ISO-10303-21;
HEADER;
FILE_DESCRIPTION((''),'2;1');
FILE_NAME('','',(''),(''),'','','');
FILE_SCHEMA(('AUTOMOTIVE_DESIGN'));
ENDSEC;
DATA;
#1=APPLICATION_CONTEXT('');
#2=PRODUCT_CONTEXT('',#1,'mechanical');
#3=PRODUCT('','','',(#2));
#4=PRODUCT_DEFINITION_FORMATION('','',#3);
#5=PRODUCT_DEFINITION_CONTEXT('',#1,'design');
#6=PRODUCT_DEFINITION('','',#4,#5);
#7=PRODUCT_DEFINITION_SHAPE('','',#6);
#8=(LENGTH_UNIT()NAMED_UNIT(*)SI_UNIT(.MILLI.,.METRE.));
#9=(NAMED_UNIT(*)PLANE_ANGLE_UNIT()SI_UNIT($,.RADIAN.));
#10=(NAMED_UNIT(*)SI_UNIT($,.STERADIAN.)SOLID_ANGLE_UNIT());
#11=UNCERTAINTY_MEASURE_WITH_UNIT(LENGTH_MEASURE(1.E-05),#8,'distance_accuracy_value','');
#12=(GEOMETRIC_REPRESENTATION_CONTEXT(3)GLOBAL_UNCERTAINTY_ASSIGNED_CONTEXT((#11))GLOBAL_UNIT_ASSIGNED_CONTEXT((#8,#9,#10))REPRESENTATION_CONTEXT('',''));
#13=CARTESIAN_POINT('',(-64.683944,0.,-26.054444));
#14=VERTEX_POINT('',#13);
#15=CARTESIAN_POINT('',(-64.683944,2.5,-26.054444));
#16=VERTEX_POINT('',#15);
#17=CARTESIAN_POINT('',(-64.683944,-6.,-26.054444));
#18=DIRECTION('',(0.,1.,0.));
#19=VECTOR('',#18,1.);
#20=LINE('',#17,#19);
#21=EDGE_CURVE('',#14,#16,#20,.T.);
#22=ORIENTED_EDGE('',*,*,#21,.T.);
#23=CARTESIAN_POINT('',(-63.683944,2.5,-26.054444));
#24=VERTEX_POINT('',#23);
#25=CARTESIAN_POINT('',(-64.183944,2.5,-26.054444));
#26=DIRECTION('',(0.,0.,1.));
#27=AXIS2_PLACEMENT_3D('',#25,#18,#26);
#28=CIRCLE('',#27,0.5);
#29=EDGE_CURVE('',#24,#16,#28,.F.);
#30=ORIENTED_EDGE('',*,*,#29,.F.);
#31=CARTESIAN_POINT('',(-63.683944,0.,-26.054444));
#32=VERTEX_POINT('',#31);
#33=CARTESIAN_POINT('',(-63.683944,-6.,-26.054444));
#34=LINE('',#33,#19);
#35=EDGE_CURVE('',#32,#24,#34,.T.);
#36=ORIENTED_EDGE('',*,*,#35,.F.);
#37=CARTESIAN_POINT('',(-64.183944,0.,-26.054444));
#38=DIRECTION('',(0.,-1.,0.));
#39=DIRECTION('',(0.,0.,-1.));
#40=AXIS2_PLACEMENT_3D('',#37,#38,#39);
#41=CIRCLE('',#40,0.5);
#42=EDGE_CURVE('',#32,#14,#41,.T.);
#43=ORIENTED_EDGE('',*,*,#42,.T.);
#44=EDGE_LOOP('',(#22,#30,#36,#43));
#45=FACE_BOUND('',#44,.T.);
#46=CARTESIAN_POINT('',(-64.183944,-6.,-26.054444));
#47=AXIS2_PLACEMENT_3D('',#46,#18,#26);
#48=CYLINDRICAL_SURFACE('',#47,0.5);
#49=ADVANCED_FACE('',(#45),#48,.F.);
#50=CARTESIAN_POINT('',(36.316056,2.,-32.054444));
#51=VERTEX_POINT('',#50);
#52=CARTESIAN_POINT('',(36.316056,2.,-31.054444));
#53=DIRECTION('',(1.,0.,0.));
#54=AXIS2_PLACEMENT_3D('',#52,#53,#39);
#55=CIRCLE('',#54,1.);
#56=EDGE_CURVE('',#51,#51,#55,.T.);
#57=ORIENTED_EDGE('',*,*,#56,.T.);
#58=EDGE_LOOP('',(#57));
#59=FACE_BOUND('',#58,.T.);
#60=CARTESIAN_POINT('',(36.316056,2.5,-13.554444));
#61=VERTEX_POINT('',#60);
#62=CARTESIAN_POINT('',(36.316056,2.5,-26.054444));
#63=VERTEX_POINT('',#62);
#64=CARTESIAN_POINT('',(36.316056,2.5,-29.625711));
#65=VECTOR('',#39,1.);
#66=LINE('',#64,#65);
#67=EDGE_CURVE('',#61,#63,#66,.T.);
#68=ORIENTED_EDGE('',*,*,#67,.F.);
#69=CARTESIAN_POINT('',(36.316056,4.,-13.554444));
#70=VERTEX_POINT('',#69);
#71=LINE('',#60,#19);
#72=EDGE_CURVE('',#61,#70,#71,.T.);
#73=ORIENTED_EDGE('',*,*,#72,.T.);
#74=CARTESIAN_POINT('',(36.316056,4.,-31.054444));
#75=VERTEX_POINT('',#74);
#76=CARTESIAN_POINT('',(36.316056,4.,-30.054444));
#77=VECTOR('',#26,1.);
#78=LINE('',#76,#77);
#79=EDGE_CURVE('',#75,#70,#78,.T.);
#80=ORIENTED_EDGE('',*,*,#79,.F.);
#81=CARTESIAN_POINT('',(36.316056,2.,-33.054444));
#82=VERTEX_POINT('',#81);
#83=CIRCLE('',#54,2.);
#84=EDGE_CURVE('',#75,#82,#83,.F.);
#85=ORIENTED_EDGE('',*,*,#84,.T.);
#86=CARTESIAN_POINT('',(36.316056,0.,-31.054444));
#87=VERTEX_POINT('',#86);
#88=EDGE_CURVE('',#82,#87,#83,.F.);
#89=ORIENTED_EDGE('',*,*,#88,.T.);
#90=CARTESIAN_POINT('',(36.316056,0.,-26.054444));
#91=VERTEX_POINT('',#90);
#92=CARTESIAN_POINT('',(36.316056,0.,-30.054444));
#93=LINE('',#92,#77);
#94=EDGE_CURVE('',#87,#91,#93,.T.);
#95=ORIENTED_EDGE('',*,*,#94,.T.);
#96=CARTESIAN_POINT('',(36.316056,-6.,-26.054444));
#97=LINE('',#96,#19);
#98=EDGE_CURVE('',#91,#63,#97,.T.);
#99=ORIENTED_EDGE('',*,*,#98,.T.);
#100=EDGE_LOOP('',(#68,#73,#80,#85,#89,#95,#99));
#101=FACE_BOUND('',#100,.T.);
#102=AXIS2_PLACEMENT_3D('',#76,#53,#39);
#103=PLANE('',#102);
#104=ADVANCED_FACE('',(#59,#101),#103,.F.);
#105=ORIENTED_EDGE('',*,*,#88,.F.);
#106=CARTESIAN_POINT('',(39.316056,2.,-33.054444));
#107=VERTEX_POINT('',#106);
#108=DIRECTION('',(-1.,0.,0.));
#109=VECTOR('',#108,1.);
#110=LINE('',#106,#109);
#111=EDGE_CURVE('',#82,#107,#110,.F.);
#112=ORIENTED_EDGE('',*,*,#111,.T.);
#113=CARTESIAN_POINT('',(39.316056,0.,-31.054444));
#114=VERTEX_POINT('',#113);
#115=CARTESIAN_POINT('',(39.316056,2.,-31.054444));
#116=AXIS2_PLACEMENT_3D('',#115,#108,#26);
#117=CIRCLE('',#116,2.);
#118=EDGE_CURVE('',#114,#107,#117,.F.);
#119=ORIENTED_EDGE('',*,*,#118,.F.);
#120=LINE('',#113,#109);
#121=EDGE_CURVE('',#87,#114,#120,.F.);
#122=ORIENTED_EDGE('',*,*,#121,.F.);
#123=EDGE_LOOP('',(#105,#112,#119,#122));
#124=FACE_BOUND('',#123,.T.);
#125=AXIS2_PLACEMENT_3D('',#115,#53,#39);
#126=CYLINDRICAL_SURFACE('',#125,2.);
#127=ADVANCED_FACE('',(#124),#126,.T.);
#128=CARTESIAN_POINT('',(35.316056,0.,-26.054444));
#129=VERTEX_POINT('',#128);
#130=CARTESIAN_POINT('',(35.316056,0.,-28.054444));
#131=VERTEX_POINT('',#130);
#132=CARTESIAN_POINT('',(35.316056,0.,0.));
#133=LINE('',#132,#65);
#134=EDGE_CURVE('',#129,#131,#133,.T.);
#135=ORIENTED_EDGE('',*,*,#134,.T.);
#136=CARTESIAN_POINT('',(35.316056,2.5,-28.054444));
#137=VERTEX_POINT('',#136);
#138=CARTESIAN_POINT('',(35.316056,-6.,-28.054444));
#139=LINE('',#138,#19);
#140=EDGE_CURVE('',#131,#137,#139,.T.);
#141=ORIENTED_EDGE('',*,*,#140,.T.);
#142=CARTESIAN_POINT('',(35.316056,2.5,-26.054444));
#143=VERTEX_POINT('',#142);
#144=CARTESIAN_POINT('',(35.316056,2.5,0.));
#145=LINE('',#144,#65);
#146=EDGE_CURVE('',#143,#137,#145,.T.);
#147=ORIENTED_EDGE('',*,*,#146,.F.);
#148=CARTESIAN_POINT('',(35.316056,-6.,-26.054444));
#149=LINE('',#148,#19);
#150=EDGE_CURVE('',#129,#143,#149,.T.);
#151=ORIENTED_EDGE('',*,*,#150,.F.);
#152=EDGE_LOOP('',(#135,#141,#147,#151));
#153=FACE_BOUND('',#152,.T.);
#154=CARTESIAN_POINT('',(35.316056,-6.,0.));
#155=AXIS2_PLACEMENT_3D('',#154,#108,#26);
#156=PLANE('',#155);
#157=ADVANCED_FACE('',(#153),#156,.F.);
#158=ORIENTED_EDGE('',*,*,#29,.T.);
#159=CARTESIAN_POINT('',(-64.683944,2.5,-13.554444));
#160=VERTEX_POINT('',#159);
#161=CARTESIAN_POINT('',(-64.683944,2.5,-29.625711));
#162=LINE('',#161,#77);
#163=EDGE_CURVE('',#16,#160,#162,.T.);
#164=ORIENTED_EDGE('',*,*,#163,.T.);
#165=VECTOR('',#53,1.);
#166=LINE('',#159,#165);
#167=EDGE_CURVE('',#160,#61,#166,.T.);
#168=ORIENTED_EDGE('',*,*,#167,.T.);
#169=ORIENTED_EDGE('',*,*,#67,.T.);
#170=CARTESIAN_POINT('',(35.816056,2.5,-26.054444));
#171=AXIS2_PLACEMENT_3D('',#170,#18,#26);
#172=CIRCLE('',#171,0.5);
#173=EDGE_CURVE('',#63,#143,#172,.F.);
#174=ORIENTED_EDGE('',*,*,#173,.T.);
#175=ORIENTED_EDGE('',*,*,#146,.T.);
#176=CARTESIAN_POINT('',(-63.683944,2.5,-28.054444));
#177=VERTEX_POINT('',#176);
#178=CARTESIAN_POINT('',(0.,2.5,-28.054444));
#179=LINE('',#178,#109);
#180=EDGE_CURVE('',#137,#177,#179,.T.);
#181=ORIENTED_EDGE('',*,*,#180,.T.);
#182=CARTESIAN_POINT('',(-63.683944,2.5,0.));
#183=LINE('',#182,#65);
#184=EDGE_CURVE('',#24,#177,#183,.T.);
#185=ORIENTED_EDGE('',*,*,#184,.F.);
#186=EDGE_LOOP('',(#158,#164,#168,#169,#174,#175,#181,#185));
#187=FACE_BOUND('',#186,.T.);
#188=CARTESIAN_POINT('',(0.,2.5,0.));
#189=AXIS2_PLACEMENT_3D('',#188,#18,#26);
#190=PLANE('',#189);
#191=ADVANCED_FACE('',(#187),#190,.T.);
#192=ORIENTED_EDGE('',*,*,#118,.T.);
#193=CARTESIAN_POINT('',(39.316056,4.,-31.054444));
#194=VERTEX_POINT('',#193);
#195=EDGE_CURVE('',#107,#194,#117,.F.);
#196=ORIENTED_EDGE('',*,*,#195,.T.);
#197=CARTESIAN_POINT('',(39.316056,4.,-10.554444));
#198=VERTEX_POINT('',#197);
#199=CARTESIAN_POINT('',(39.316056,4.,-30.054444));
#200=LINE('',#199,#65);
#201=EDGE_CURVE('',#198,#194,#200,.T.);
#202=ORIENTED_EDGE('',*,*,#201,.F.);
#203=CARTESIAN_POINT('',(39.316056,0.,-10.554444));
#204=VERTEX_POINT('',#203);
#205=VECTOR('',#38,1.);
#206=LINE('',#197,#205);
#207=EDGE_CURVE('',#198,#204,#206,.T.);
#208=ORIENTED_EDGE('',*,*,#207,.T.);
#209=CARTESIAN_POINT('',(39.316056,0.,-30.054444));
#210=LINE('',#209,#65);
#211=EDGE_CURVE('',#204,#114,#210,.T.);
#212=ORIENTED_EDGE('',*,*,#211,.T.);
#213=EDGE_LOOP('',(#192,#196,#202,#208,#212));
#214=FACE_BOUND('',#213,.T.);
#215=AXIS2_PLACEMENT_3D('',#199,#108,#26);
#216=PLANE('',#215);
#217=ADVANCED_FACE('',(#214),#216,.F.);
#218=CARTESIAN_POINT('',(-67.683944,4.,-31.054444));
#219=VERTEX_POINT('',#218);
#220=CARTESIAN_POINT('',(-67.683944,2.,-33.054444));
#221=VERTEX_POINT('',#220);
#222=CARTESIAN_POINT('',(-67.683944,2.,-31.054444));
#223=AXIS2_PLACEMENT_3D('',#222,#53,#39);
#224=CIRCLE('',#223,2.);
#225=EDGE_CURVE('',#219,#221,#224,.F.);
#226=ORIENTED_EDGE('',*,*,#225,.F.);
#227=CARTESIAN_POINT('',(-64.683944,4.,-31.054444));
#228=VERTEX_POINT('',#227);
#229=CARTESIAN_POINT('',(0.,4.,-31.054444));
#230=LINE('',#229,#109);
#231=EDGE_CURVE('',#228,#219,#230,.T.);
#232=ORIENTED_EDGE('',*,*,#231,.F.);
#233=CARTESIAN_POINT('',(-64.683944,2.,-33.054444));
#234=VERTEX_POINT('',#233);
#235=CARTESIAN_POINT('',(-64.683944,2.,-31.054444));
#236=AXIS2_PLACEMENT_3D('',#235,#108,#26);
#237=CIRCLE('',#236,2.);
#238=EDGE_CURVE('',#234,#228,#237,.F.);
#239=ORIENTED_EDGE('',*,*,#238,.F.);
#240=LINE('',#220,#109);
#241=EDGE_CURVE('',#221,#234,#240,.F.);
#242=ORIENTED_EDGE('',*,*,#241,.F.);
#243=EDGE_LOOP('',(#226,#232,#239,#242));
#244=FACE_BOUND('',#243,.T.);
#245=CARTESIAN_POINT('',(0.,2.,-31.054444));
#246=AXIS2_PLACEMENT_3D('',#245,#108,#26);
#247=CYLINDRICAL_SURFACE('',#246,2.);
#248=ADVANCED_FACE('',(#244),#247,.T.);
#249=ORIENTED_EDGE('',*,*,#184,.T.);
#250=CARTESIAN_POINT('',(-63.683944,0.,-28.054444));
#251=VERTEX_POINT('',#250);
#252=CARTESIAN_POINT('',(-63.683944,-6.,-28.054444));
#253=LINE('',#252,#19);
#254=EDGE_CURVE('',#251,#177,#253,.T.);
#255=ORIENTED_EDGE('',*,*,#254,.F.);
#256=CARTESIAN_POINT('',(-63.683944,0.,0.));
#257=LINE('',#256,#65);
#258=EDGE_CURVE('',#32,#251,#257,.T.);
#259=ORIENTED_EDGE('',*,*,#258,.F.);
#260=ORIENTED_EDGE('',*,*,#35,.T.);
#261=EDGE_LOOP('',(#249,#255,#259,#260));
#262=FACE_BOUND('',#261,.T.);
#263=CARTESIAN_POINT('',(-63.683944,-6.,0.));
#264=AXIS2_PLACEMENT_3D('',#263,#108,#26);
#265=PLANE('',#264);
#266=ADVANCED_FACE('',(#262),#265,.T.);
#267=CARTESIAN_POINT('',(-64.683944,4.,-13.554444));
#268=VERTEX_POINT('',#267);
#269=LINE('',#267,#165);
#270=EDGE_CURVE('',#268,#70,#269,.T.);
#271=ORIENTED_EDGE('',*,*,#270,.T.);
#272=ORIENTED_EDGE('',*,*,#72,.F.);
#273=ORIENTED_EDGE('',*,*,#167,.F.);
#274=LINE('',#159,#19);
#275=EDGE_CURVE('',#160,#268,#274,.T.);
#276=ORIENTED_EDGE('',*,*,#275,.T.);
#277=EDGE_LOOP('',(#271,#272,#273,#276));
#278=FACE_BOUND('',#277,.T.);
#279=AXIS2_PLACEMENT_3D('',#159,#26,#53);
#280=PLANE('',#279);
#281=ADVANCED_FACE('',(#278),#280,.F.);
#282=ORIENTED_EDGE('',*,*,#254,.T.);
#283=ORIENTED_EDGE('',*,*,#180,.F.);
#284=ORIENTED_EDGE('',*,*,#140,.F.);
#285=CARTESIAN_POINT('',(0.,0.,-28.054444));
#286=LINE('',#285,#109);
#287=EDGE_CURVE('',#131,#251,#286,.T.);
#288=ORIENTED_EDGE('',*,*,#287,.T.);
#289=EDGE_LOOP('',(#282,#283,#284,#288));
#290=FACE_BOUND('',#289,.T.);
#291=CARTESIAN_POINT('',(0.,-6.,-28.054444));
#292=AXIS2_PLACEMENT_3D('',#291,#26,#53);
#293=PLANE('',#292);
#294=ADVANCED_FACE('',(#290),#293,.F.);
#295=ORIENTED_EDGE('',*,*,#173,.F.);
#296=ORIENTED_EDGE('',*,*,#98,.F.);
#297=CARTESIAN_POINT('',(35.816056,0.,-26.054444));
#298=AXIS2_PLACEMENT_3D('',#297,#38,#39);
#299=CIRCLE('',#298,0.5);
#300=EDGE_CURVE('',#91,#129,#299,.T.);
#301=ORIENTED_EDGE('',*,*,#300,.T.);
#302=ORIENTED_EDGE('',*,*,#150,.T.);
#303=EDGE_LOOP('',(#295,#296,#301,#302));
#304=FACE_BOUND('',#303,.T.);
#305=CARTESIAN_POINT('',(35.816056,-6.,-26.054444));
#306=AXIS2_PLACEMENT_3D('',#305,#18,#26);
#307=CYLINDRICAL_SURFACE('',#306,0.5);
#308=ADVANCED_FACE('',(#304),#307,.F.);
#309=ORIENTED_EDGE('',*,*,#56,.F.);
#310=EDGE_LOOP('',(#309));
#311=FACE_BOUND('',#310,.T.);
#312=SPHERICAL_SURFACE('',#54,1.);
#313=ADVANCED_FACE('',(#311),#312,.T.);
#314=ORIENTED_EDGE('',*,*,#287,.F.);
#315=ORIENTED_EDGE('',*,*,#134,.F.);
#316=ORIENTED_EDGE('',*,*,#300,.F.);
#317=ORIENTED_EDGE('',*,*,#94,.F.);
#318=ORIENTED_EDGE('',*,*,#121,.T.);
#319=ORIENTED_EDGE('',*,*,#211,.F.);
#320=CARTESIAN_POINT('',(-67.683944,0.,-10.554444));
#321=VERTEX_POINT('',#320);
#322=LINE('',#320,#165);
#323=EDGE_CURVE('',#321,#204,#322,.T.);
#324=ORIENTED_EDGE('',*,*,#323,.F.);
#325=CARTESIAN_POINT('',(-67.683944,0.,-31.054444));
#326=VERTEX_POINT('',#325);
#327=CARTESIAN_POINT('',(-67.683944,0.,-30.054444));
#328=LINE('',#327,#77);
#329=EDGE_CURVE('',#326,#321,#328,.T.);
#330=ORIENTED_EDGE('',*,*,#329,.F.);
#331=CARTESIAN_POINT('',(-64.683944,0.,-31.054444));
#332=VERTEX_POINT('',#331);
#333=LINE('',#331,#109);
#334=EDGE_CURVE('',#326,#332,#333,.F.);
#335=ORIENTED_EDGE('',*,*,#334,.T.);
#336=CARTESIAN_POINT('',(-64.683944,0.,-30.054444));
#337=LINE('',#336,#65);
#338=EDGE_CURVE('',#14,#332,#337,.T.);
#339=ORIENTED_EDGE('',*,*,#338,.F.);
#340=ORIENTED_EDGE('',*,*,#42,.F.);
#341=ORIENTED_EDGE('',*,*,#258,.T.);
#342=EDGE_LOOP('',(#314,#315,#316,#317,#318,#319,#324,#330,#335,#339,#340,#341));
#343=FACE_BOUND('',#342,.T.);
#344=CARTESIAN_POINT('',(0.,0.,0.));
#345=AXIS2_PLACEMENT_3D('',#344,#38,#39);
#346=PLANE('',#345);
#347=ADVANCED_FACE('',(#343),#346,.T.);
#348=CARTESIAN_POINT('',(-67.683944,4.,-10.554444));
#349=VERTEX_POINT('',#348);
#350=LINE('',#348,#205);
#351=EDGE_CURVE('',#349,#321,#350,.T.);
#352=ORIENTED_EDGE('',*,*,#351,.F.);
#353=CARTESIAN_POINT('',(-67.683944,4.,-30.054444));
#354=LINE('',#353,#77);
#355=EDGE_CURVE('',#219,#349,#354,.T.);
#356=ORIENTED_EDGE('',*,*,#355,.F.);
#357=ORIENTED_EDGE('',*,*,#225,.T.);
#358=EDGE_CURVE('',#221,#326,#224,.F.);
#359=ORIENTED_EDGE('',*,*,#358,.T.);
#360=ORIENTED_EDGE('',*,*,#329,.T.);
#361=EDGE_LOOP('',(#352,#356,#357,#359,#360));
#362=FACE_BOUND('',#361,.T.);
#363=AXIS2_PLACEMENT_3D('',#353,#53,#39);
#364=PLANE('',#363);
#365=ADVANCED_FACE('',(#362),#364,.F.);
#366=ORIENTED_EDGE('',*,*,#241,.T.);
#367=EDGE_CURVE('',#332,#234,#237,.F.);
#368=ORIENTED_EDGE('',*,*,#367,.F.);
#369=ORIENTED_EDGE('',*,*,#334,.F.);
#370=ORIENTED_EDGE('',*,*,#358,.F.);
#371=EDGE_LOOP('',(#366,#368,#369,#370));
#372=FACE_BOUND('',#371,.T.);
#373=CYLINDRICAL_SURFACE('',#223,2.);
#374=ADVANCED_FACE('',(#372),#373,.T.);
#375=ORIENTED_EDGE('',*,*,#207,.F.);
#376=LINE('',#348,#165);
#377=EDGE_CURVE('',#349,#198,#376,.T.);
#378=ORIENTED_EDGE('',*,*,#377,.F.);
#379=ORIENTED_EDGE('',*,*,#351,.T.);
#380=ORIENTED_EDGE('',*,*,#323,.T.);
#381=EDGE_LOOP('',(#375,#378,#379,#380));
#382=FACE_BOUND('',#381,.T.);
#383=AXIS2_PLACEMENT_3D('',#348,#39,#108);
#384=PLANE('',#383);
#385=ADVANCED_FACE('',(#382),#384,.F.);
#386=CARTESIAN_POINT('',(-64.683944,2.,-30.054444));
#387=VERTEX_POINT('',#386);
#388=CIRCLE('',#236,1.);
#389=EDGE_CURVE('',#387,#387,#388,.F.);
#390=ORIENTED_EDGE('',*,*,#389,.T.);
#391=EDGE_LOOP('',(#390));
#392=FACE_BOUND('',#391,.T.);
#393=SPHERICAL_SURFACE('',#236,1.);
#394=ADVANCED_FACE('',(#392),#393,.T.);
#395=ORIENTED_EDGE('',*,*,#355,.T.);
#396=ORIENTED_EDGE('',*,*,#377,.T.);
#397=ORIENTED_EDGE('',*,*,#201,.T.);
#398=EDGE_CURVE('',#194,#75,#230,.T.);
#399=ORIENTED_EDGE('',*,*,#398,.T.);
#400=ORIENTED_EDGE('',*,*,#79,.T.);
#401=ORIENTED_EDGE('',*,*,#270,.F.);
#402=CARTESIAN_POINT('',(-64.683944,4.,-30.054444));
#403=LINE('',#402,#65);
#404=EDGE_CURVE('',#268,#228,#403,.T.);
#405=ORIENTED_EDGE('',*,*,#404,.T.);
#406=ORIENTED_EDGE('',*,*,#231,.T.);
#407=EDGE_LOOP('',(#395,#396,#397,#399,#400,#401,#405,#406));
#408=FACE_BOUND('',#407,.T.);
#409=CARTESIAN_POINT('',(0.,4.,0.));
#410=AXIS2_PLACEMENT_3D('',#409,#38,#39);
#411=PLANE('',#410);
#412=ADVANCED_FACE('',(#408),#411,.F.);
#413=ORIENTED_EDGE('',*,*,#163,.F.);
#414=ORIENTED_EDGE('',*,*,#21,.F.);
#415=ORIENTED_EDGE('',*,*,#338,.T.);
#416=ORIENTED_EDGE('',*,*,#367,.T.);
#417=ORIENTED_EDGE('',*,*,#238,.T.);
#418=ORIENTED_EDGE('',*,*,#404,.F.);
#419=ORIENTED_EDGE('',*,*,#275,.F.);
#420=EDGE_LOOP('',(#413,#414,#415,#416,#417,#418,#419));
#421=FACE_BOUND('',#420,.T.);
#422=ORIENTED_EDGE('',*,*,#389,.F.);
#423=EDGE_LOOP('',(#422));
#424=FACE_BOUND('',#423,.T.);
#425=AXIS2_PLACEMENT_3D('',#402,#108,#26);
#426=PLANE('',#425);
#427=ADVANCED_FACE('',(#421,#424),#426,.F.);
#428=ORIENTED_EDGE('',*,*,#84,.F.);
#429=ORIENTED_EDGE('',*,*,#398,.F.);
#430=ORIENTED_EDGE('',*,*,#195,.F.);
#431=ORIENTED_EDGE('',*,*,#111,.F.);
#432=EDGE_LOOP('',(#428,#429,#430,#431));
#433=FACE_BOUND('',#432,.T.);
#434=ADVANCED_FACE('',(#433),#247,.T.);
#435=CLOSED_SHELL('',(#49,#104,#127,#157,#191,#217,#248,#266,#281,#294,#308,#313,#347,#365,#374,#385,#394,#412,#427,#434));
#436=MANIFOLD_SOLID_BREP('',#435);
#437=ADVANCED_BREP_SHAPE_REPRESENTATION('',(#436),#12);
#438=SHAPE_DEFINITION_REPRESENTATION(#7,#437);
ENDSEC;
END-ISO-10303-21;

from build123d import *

# Parameters (mm, degrees)
SALIENTE_EXTRUIR1_DEPTH = 4
CROQUIS4_W              = 99
CROQUIS4_H              = 2
CORTAR_EXTRUIR1_DEPTH   = 10
REDONDEO1_R             = 2
CROQUIS5_W              = 101
CROQUIS5_H              = 16.071267716
CORTAR_EXTRUIR2_DEPTH   = 1.5


with BuildPart() as part:
    # Croquis1 → Saliente-Extruir1 (new body)
    with BuildSketch(Plane(origin=(0, 0, 0), x_dir=(1, 0, 0), z_dir=(0, 1, 0))):
        Polygon((-64.683943666, 30.054443615), (36.316056334, 30.054443615), (36.316056334, 33.054443615), (39.316056334, 33.054443615), (39.316056334, 30.054443615), (39.316056334, 10.554443615), (-67.683943666, 10.554443615), (-67.683943666, 30.054443615), (-67.683943666, 33.054443615), (-64.683943666, 33.054443615), align=None)
    extrude(amount=SALIENTE_EXTRUIR1_DEPTH)

    # Croquis4 → Cortar-Extruir1 (cut)
    with BuildSketch(Plane(origin=(0, 4, 0), x_dir=(1, 0, 0), z_dir=(0, 1, 0))):
        with Locations((-14.183943666, 29.054443615)):
            Rectangle(CROQUIS4_W, CROQUIS4_H)
        with BuildLine():
            Line((36.316056334, 26.054443615), (36.316056334, 30.054443615))
            Line((36.316056334, 30.054443615), (35.316056334, 30.054443615))
            Line((35.316056334, 30.054443615), (35.316056334, 28.054443615))
            Line((35.316056334, 28.054443615), (35.316056334, 26.054443615))
            ThreePointArc((35.316056334, 26.054443615), (35.816056334, 25.554443615), (36.316056334, 26.054443615))
        make_face()
        with BuildLine():
            Line((-63.683943666, 28.054443615), (-63.683943666, 30.054443615))
            Line((-63.683943666, 30.054443615), (-64.683943666, 30.054443615))
            Line((-64.683943666, 30.054443615), (-64.683943666, 26.054443615))
            ThreePointArc((-64.683943666, 26.054443615), (-64.183943666, 25.554443615), (-63.683943666, 26.054443615))
            Line((-63.683943666, 26.054443615), (-63.683943666, 28.054443615))
        make_face()
    extrude(amount=-CORTAR_EXTRUIR1_DEPTH, mode=Mode.SUBTRACT)

    # Redondeo1
    redondeo1_edges = [part.edges().sort_by_distance(p)[0] for p in [
        (-66.183943666, 0, -33.054443615),
        (-66.183943666, 4, -33.054443615),
        (37.816056334, 0, -33.054443615),
        (37.816056334, 4, -33.054443615),
    ]]
    fillet(redondeo1_edges, radius=REDONDEO1_R - 0.0001)  # a hair under: the kernel refuses the full size

    # Croquis3 → Revolución1 (revolve)
    with BuildSketch(Plane(origin=(-64.683943666, 0, 0), x_dir=(0, 0, -1), z_dir=(1, 0, 0))):
        with BuildLine():
            Line((32.054443615, 2), (30.054443615, 2))
            ThreePointArc((30.054443615, 2), (31.054443615, 1), (32.054443615, 2))
        make_face()
    revolve(axis=Axis((-64.683943666, 2, -32.054443615), (0, 0, 1)))

    # Croquis2 → Revolución2 (revolve)
    with BuildSketch(Plane.ZY.offset(-36.316056334)):
        with BuildLine():
            Line((-32.054443615, 2), (-30.054443615, 2))
            ThreePointArc((-30.054443615, 2), (-31.054443615, 1), (-32.054443615, 2))
        make_face()
    revolve(axis=Axis((36.316056334, 2, -32.054443615), (0, 0, 1)))

    # Croquis5 → Cortar-Extruir2 (cut)
    with BuildSketch(Plane(origin=(0, 4, 0), x_dir=(1, 0, 0), z_dir=(0, 1, 0))):
        with Locations((-14.183943666, 21.590077473)):
            Rectangle(CROQUIS5_W, CROQUIS5_H)
    extrude(amount=-CORTAR_EXTRUIR2_DEPTH, mode=Mode.SUBTRACT)


solid = part.part
